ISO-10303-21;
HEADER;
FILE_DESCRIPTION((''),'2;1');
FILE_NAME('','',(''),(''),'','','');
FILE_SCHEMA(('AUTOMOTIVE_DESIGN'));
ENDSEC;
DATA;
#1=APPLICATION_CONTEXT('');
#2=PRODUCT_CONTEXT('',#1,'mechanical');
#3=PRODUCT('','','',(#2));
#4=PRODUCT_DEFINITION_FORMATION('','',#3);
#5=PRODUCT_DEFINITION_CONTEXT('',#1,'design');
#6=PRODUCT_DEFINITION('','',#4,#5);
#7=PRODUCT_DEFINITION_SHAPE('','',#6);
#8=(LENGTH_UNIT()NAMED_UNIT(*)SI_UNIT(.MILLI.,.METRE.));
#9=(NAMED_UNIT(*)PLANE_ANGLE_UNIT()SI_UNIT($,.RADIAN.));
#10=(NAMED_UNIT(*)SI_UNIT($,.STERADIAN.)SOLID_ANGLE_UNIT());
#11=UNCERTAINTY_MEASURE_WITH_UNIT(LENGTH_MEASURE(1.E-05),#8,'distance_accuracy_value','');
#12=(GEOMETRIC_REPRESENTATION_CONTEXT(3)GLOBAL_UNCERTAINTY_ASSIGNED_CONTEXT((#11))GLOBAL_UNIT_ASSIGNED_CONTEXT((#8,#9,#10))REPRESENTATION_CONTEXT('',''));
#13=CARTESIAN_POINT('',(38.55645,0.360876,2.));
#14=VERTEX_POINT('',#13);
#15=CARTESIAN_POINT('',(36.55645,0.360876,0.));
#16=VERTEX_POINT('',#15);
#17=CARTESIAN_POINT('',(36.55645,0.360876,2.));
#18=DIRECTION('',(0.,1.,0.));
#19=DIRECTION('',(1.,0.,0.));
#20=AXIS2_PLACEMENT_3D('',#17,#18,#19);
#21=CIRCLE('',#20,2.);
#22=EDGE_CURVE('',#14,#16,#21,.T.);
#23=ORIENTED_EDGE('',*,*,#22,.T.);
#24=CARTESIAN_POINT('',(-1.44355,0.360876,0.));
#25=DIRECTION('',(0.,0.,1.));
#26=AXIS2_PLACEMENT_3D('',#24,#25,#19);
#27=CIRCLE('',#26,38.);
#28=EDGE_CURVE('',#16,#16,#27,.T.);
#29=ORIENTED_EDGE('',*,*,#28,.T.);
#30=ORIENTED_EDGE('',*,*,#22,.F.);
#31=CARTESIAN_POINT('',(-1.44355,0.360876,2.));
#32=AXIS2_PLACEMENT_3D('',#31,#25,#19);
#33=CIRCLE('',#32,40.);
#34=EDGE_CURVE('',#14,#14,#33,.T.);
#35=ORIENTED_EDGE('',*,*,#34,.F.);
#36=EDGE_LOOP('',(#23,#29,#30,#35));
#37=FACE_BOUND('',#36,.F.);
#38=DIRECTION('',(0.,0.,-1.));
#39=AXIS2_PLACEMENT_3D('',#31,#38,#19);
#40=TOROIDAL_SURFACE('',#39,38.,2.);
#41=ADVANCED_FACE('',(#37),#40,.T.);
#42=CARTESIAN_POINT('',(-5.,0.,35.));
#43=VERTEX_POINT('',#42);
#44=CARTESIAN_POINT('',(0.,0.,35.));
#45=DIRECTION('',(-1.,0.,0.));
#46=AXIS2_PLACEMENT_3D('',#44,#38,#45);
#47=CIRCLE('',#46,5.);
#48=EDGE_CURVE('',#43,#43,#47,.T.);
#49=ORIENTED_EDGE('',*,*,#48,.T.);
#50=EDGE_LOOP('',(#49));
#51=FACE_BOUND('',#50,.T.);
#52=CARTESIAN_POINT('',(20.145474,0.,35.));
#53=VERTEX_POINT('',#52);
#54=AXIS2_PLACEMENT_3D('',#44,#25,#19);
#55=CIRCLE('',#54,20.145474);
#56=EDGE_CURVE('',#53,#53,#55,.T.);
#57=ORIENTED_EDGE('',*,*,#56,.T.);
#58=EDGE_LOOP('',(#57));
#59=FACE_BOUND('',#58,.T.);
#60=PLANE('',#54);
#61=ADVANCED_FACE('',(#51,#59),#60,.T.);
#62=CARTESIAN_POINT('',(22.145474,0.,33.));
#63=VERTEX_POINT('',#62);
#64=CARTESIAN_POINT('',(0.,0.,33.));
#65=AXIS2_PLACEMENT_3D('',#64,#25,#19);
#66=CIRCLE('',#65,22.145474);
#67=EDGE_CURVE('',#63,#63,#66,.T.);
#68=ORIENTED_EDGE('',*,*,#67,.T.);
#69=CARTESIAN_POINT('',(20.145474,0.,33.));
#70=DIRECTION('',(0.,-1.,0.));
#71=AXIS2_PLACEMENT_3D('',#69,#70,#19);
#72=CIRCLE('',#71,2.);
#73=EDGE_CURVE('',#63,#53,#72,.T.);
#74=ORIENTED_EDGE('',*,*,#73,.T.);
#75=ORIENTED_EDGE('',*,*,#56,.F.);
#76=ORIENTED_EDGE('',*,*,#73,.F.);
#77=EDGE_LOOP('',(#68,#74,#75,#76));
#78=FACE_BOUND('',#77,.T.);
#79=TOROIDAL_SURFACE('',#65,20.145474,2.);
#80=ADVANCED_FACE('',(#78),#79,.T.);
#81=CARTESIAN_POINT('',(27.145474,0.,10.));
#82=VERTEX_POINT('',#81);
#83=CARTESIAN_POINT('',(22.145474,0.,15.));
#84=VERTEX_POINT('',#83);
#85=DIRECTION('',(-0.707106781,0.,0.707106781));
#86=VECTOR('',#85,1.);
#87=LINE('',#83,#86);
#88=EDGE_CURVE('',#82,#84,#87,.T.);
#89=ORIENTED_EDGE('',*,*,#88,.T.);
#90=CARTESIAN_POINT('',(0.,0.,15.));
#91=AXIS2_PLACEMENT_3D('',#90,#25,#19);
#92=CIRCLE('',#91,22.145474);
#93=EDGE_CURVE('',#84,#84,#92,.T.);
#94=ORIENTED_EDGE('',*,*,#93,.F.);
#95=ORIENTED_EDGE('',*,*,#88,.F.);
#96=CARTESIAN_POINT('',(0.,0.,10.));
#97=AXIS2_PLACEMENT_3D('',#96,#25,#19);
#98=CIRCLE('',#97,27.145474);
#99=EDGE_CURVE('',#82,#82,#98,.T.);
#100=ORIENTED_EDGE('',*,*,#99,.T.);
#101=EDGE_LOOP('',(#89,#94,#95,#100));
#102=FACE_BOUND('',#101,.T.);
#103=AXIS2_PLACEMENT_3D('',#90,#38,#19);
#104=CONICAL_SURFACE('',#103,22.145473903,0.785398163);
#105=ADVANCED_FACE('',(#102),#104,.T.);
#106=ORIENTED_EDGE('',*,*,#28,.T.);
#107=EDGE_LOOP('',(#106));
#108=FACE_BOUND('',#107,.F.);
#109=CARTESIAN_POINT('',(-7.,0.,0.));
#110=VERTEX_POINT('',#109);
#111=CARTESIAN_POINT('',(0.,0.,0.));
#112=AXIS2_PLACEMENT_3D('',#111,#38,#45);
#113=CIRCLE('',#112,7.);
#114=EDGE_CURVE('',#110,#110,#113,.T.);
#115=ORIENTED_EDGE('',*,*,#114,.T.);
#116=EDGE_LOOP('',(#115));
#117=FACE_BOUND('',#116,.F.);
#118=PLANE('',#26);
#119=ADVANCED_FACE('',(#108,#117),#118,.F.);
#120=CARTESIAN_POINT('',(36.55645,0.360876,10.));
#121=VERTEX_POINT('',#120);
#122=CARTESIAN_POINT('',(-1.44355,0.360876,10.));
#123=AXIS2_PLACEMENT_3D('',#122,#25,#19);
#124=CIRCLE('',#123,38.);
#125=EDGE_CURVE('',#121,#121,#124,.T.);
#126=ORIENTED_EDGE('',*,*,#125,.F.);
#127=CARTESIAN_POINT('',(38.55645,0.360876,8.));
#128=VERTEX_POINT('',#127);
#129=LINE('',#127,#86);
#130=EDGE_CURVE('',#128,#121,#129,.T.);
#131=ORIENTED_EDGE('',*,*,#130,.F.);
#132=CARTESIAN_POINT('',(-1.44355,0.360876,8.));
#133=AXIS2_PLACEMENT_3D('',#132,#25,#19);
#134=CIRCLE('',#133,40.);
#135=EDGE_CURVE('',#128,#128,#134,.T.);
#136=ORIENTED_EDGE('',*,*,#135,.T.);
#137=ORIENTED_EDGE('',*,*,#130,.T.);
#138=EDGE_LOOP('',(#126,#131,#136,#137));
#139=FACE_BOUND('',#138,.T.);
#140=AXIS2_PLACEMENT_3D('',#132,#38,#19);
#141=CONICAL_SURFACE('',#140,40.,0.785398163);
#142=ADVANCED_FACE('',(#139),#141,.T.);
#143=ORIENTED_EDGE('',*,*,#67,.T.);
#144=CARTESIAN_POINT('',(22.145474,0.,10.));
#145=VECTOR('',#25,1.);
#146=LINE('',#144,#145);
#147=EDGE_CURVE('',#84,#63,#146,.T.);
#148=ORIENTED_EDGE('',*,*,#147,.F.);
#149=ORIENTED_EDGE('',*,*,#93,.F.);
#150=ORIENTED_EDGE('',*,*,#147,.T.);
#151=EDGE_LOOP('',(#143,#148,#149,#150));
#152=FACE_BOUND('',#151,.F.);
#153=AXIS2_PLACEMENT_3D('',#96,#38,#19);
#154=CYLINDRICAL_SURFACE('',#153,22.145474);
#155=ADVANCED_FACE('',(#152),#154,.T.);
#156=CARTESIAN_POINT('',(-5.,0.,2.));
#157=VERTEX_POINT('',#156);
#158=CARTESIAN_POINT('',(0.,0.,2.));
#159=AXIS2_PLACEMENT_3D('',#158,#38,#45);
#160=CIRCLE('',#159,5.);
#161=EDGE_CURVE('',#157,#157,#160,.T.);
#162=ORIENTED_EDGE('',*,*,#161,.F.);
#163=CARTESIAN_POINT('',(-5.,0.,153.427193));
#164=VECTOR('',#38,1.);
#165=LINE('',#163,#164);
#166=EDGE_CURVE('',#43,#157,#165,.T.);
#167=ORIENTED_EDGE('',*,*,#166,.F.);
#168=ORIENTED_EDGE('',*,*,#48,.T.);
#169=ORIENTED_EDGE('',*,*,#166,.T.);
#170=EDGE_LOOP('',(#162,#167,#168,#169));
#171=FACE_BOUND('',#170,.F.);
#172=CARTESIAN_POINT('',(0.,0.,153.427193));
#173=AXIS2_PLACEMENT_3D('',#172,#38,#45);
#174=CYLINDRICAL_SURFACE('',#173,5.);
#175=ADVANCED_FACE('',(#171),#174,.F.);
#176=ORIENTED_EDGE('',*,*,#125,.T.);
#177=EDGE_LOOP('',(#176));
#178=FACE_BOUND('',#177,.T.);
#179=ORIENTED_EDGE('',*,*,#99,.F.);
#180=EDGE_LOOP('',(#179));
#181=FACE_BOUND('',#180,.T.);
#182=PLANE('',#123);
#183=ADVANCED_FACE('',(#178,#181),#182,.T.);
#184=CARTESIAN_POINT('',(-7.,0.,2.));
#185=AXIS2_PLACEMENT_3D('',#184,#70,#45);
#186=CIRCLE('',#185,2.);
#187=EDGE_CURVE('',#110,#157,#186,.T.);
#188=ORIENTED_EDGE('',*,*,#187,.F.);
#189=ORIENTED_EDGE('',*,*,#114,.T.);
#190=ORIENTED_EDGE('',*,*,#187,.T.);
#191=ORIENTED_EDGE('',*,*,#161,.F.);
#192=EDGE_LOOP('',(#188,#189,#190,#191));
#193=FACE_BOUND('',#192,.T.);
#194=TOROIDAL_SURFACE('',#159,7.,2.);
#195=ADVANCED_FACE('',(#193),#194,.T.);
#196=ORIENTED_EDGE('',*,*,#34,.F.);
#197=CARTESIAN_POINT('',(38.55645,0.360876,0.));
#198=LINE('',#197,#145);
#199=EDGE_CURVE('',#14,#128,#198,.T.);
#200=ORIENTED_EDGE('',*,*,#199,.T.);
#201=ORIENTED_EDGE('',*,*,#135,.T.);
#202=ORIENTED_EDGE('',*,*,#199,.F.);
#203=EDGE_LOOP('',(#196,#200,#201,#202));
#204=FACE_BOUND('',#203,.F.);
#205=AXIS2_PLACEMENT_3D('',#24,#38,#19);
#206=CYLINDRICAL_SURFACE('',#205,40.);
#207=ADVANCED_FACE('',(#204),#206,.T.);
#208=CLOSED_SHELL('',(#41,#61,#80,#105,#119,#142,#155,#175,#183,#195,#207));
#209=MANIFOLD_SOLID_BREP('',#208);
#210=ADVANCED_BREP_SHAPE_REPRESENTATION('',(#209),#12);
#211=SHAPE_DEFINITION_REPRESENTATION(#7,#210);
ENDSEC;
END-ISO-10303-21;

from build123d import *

# Parameters (mm, degrees)
F0_R     = 40
F1_DEPTH = 10
F2_SIZE  = 2
F3_R     = 22.145473903
F4_DEPTH = 25
F6_D     = 10
F7_R     = 2
F8_SIZE  = 5


with BuildPart() as f1:
    # F0 (on Top) → F1 (new body)
    with BuildSketch(Plane.XY):
        with Locations((-1.4435499907, 0.3608763218)):
            Circle(F0_R)
    extrude(amount=F1_DEPTH)

    # F2
    f2_edges = [f1.edges().sort_by_distance(p)[0] for p in [
        (-41.44355, 0.360876, 10),
    ]]
    chamfer(f2_edges, length=F2_SIZE)

    # F3 (on face) → F4 (join)
    with BuildSketch(Plane.XY.offset(10)):
        Circle(F3_R)
    extrude(amount=F4_DEPTH)

    # F6 (through all)
    with Locations(Plane.XY.offset(35)):
        with Locations((0, 0)):
            Hole(F6_D / 2)

    # F7
    f7_edges = [f1.edges().sort_by_distance(p)[0] for p in [
        (-41.44355, 0.360876, 0),
        (-22.145474, 0, 35),
        (-5, 0, 0),
    ]]
    fillet(f7_edges, radius=F7_R)

    # F8
    f8_edges = [f1.edges().sort_by_distance(p)[0] for p in [
        (22.145474, 0, 21.5),
        (-22.145474, 0, 33),
        (-22.145474, 0, 10),
    ]]
    chamfer(f8_edges, length=F8_SIZE)


solid = f1.part
